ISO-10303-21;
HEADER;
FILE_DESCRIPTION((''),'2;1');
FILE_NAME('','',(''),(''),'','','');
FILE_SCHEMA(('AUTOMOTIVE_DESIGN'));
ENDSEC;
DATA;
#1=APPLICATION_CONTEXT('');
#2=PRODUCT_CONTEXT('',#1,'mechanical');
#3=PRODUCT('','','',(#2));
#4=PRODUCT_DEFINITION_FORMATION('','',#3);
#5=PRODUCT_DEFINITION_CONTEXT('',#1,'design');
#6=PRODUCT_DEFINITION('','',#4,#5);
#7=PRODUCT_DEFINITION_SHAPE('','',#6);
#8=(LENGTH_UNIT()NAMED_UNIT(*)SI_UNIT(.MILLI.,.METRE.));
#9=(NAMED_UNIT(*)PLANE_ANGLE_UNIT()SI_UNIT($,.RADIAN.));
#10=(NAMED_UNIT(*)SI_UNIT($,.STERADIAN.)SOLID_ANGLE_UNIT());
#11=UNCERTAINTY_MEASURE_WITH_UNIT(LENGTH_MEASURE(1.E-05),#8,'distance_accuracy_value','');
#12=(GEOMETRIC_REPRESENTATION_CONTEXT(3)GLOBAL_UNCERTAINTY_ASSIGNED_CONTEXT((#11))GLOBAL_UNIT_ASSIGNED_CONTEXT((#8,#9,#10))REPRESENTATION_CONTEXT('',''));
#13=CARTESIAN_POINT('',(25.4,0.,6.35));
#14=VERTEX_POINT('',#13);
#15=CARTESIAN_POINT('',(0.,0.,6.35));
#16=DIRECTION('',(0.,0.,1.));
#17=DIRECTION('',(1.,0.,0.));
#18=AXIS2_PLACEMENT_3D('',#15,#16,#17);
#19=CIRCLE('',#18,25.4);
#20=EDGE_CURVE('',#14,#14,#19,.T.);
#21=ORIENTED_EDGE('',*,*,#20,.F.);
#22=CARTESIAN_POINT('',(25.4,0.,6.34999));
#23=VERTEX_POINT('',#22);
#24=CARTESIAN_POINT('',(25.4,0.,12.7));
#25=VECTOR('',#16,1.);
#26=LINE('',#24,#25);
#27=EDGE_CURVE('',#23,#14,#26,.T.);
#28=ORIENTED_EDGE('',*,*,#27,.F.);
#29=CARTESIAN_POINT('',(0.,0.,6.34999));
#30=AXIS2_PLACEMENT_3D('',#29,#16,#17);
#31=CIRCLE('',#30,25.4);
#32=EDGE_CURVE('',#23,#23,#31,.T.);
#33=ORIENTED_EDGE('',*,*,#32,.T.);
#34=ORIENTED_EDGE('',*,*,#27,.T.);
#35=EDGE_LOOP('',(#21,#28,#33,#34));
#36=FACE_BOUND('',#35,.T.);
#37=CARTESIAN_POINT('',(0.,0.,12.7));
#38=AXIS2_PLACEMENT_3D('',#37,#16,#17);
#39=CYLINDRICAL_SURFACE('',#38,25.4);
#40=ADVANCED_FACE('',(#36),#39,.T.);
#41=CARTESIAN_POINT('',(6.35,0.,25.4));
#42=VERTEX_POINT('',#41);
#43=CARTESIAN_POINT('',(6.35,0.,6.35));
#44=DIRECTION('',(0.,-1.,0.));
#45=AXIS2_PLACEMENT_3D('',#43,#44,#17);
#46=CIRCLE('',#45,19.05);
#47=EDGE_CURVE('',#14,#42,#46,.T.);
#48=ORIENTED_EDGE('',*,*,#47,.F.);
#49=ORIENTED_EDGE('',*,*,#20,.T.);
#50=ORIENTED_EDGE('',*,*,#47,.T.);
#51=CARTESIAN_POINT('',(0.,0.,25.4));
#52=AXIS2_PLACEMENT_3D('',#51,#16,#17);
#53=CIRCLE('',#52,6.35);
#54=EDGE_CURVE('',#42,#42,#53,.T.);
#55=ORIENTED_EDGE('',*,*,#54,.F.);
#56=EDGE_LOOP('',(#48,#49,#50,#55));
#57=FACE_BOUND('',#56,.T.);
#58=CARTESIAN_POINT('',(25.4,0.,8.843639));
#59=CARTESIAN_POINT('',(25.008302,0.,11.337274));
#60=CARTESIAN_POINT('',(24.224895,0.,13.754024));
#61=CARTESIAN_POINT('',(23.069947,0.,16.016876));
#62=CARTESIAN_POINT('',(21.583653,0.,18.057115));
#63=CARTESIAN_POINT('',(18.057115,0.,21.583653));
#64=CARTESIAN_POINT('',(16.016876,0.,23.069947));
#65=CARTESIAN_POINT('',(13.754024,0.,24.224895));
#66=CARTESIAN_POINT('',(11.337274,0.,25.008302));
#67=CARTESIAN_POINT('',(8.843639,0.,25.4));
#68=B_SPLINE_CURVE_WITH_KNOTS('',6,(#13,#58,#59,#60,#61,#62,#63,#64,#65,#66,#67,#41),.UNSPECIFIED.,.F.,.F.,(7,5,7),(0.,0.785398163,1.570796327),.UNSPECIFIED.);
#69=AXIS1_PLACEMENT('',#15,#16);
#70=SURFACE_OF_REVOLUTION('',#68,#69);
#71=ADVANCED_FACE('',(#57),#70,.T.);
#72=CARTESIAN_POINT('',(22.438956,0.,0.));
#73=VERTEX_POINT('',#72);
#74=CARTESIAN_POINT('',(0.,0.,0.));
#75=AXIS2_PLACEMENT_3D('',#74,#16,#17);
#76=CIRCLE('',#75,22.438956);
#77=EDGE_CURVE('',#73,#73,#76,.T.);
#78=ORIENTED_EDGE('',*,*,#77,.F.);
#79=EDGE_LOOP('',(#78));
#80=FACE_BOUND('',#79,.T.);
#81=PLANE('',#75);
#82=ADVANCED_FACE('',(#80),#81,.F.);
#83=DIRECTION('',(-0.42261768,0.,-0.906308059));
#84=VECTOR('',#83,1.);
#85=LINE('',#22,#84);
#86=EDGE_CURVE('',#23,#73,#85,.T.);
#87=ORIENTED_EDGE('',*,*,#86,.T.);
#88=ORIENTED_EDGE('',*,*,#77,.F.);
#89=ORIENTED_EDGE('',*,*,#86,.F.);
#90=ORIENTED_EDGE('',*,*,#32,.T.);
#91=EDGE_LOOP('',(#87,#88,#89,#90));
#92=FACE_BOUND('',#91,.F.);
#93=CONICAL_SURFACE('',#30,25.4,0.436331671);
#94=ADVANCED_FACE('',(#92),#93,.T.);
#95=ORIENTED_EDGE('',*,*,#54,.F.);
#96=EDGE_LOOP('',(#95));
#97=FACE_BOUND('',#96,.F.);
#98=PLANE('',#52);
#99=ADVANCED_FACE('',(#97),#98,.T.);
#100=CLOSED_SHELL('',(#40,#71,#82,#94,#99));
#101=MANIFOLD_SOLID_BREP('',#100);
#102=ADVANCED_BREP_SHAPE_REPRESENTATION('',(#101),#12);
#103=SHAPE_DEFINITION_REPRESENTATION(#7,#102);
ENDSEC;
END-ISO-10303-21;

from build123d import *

# Parameters (mm, degrees)
F0_W     = 25.4
F0_H     = 25.4
F2_R     = 19.05
F3_SIZE2 = 2.961044
F3_SIZE  = 6.34999


# Not quite as in the source:
# - a fillet or chamfer is up to 0.001 mm smaller than in the source, because OpenCascade refuses the exact size


with BuildPart() as f1:
    # F0 (on Front) → F1 (revolve)
    with BuildSketch(Plane.XZ):
        with Locations((12.7, 12.7)):
            Rectangle(F0_W, F0_H)
    revolve(axis=Axis((0, 0, 12.7), (0, 0, 1)))

    # F2
    f2_edges = [f1.edges().sort_by_distance(p)[0] for p in [
        (-25.4, 0, 25.4),
    ]]
    fillet(f2_edges, radius=F2_R)

    # F3 (size 6.35 and 2.9610536293 in the source; OpenCascade refuses exactly that, so slightly less here)
    f3_edges = [f1.edges().sort_by_distance(p)[0] for p in [
        (-25.4, 0, 0),
    ]]
    chamfer(f3_edges, length=F3_SIZE, length2=F3_SIZE2)


solid = f1.part
